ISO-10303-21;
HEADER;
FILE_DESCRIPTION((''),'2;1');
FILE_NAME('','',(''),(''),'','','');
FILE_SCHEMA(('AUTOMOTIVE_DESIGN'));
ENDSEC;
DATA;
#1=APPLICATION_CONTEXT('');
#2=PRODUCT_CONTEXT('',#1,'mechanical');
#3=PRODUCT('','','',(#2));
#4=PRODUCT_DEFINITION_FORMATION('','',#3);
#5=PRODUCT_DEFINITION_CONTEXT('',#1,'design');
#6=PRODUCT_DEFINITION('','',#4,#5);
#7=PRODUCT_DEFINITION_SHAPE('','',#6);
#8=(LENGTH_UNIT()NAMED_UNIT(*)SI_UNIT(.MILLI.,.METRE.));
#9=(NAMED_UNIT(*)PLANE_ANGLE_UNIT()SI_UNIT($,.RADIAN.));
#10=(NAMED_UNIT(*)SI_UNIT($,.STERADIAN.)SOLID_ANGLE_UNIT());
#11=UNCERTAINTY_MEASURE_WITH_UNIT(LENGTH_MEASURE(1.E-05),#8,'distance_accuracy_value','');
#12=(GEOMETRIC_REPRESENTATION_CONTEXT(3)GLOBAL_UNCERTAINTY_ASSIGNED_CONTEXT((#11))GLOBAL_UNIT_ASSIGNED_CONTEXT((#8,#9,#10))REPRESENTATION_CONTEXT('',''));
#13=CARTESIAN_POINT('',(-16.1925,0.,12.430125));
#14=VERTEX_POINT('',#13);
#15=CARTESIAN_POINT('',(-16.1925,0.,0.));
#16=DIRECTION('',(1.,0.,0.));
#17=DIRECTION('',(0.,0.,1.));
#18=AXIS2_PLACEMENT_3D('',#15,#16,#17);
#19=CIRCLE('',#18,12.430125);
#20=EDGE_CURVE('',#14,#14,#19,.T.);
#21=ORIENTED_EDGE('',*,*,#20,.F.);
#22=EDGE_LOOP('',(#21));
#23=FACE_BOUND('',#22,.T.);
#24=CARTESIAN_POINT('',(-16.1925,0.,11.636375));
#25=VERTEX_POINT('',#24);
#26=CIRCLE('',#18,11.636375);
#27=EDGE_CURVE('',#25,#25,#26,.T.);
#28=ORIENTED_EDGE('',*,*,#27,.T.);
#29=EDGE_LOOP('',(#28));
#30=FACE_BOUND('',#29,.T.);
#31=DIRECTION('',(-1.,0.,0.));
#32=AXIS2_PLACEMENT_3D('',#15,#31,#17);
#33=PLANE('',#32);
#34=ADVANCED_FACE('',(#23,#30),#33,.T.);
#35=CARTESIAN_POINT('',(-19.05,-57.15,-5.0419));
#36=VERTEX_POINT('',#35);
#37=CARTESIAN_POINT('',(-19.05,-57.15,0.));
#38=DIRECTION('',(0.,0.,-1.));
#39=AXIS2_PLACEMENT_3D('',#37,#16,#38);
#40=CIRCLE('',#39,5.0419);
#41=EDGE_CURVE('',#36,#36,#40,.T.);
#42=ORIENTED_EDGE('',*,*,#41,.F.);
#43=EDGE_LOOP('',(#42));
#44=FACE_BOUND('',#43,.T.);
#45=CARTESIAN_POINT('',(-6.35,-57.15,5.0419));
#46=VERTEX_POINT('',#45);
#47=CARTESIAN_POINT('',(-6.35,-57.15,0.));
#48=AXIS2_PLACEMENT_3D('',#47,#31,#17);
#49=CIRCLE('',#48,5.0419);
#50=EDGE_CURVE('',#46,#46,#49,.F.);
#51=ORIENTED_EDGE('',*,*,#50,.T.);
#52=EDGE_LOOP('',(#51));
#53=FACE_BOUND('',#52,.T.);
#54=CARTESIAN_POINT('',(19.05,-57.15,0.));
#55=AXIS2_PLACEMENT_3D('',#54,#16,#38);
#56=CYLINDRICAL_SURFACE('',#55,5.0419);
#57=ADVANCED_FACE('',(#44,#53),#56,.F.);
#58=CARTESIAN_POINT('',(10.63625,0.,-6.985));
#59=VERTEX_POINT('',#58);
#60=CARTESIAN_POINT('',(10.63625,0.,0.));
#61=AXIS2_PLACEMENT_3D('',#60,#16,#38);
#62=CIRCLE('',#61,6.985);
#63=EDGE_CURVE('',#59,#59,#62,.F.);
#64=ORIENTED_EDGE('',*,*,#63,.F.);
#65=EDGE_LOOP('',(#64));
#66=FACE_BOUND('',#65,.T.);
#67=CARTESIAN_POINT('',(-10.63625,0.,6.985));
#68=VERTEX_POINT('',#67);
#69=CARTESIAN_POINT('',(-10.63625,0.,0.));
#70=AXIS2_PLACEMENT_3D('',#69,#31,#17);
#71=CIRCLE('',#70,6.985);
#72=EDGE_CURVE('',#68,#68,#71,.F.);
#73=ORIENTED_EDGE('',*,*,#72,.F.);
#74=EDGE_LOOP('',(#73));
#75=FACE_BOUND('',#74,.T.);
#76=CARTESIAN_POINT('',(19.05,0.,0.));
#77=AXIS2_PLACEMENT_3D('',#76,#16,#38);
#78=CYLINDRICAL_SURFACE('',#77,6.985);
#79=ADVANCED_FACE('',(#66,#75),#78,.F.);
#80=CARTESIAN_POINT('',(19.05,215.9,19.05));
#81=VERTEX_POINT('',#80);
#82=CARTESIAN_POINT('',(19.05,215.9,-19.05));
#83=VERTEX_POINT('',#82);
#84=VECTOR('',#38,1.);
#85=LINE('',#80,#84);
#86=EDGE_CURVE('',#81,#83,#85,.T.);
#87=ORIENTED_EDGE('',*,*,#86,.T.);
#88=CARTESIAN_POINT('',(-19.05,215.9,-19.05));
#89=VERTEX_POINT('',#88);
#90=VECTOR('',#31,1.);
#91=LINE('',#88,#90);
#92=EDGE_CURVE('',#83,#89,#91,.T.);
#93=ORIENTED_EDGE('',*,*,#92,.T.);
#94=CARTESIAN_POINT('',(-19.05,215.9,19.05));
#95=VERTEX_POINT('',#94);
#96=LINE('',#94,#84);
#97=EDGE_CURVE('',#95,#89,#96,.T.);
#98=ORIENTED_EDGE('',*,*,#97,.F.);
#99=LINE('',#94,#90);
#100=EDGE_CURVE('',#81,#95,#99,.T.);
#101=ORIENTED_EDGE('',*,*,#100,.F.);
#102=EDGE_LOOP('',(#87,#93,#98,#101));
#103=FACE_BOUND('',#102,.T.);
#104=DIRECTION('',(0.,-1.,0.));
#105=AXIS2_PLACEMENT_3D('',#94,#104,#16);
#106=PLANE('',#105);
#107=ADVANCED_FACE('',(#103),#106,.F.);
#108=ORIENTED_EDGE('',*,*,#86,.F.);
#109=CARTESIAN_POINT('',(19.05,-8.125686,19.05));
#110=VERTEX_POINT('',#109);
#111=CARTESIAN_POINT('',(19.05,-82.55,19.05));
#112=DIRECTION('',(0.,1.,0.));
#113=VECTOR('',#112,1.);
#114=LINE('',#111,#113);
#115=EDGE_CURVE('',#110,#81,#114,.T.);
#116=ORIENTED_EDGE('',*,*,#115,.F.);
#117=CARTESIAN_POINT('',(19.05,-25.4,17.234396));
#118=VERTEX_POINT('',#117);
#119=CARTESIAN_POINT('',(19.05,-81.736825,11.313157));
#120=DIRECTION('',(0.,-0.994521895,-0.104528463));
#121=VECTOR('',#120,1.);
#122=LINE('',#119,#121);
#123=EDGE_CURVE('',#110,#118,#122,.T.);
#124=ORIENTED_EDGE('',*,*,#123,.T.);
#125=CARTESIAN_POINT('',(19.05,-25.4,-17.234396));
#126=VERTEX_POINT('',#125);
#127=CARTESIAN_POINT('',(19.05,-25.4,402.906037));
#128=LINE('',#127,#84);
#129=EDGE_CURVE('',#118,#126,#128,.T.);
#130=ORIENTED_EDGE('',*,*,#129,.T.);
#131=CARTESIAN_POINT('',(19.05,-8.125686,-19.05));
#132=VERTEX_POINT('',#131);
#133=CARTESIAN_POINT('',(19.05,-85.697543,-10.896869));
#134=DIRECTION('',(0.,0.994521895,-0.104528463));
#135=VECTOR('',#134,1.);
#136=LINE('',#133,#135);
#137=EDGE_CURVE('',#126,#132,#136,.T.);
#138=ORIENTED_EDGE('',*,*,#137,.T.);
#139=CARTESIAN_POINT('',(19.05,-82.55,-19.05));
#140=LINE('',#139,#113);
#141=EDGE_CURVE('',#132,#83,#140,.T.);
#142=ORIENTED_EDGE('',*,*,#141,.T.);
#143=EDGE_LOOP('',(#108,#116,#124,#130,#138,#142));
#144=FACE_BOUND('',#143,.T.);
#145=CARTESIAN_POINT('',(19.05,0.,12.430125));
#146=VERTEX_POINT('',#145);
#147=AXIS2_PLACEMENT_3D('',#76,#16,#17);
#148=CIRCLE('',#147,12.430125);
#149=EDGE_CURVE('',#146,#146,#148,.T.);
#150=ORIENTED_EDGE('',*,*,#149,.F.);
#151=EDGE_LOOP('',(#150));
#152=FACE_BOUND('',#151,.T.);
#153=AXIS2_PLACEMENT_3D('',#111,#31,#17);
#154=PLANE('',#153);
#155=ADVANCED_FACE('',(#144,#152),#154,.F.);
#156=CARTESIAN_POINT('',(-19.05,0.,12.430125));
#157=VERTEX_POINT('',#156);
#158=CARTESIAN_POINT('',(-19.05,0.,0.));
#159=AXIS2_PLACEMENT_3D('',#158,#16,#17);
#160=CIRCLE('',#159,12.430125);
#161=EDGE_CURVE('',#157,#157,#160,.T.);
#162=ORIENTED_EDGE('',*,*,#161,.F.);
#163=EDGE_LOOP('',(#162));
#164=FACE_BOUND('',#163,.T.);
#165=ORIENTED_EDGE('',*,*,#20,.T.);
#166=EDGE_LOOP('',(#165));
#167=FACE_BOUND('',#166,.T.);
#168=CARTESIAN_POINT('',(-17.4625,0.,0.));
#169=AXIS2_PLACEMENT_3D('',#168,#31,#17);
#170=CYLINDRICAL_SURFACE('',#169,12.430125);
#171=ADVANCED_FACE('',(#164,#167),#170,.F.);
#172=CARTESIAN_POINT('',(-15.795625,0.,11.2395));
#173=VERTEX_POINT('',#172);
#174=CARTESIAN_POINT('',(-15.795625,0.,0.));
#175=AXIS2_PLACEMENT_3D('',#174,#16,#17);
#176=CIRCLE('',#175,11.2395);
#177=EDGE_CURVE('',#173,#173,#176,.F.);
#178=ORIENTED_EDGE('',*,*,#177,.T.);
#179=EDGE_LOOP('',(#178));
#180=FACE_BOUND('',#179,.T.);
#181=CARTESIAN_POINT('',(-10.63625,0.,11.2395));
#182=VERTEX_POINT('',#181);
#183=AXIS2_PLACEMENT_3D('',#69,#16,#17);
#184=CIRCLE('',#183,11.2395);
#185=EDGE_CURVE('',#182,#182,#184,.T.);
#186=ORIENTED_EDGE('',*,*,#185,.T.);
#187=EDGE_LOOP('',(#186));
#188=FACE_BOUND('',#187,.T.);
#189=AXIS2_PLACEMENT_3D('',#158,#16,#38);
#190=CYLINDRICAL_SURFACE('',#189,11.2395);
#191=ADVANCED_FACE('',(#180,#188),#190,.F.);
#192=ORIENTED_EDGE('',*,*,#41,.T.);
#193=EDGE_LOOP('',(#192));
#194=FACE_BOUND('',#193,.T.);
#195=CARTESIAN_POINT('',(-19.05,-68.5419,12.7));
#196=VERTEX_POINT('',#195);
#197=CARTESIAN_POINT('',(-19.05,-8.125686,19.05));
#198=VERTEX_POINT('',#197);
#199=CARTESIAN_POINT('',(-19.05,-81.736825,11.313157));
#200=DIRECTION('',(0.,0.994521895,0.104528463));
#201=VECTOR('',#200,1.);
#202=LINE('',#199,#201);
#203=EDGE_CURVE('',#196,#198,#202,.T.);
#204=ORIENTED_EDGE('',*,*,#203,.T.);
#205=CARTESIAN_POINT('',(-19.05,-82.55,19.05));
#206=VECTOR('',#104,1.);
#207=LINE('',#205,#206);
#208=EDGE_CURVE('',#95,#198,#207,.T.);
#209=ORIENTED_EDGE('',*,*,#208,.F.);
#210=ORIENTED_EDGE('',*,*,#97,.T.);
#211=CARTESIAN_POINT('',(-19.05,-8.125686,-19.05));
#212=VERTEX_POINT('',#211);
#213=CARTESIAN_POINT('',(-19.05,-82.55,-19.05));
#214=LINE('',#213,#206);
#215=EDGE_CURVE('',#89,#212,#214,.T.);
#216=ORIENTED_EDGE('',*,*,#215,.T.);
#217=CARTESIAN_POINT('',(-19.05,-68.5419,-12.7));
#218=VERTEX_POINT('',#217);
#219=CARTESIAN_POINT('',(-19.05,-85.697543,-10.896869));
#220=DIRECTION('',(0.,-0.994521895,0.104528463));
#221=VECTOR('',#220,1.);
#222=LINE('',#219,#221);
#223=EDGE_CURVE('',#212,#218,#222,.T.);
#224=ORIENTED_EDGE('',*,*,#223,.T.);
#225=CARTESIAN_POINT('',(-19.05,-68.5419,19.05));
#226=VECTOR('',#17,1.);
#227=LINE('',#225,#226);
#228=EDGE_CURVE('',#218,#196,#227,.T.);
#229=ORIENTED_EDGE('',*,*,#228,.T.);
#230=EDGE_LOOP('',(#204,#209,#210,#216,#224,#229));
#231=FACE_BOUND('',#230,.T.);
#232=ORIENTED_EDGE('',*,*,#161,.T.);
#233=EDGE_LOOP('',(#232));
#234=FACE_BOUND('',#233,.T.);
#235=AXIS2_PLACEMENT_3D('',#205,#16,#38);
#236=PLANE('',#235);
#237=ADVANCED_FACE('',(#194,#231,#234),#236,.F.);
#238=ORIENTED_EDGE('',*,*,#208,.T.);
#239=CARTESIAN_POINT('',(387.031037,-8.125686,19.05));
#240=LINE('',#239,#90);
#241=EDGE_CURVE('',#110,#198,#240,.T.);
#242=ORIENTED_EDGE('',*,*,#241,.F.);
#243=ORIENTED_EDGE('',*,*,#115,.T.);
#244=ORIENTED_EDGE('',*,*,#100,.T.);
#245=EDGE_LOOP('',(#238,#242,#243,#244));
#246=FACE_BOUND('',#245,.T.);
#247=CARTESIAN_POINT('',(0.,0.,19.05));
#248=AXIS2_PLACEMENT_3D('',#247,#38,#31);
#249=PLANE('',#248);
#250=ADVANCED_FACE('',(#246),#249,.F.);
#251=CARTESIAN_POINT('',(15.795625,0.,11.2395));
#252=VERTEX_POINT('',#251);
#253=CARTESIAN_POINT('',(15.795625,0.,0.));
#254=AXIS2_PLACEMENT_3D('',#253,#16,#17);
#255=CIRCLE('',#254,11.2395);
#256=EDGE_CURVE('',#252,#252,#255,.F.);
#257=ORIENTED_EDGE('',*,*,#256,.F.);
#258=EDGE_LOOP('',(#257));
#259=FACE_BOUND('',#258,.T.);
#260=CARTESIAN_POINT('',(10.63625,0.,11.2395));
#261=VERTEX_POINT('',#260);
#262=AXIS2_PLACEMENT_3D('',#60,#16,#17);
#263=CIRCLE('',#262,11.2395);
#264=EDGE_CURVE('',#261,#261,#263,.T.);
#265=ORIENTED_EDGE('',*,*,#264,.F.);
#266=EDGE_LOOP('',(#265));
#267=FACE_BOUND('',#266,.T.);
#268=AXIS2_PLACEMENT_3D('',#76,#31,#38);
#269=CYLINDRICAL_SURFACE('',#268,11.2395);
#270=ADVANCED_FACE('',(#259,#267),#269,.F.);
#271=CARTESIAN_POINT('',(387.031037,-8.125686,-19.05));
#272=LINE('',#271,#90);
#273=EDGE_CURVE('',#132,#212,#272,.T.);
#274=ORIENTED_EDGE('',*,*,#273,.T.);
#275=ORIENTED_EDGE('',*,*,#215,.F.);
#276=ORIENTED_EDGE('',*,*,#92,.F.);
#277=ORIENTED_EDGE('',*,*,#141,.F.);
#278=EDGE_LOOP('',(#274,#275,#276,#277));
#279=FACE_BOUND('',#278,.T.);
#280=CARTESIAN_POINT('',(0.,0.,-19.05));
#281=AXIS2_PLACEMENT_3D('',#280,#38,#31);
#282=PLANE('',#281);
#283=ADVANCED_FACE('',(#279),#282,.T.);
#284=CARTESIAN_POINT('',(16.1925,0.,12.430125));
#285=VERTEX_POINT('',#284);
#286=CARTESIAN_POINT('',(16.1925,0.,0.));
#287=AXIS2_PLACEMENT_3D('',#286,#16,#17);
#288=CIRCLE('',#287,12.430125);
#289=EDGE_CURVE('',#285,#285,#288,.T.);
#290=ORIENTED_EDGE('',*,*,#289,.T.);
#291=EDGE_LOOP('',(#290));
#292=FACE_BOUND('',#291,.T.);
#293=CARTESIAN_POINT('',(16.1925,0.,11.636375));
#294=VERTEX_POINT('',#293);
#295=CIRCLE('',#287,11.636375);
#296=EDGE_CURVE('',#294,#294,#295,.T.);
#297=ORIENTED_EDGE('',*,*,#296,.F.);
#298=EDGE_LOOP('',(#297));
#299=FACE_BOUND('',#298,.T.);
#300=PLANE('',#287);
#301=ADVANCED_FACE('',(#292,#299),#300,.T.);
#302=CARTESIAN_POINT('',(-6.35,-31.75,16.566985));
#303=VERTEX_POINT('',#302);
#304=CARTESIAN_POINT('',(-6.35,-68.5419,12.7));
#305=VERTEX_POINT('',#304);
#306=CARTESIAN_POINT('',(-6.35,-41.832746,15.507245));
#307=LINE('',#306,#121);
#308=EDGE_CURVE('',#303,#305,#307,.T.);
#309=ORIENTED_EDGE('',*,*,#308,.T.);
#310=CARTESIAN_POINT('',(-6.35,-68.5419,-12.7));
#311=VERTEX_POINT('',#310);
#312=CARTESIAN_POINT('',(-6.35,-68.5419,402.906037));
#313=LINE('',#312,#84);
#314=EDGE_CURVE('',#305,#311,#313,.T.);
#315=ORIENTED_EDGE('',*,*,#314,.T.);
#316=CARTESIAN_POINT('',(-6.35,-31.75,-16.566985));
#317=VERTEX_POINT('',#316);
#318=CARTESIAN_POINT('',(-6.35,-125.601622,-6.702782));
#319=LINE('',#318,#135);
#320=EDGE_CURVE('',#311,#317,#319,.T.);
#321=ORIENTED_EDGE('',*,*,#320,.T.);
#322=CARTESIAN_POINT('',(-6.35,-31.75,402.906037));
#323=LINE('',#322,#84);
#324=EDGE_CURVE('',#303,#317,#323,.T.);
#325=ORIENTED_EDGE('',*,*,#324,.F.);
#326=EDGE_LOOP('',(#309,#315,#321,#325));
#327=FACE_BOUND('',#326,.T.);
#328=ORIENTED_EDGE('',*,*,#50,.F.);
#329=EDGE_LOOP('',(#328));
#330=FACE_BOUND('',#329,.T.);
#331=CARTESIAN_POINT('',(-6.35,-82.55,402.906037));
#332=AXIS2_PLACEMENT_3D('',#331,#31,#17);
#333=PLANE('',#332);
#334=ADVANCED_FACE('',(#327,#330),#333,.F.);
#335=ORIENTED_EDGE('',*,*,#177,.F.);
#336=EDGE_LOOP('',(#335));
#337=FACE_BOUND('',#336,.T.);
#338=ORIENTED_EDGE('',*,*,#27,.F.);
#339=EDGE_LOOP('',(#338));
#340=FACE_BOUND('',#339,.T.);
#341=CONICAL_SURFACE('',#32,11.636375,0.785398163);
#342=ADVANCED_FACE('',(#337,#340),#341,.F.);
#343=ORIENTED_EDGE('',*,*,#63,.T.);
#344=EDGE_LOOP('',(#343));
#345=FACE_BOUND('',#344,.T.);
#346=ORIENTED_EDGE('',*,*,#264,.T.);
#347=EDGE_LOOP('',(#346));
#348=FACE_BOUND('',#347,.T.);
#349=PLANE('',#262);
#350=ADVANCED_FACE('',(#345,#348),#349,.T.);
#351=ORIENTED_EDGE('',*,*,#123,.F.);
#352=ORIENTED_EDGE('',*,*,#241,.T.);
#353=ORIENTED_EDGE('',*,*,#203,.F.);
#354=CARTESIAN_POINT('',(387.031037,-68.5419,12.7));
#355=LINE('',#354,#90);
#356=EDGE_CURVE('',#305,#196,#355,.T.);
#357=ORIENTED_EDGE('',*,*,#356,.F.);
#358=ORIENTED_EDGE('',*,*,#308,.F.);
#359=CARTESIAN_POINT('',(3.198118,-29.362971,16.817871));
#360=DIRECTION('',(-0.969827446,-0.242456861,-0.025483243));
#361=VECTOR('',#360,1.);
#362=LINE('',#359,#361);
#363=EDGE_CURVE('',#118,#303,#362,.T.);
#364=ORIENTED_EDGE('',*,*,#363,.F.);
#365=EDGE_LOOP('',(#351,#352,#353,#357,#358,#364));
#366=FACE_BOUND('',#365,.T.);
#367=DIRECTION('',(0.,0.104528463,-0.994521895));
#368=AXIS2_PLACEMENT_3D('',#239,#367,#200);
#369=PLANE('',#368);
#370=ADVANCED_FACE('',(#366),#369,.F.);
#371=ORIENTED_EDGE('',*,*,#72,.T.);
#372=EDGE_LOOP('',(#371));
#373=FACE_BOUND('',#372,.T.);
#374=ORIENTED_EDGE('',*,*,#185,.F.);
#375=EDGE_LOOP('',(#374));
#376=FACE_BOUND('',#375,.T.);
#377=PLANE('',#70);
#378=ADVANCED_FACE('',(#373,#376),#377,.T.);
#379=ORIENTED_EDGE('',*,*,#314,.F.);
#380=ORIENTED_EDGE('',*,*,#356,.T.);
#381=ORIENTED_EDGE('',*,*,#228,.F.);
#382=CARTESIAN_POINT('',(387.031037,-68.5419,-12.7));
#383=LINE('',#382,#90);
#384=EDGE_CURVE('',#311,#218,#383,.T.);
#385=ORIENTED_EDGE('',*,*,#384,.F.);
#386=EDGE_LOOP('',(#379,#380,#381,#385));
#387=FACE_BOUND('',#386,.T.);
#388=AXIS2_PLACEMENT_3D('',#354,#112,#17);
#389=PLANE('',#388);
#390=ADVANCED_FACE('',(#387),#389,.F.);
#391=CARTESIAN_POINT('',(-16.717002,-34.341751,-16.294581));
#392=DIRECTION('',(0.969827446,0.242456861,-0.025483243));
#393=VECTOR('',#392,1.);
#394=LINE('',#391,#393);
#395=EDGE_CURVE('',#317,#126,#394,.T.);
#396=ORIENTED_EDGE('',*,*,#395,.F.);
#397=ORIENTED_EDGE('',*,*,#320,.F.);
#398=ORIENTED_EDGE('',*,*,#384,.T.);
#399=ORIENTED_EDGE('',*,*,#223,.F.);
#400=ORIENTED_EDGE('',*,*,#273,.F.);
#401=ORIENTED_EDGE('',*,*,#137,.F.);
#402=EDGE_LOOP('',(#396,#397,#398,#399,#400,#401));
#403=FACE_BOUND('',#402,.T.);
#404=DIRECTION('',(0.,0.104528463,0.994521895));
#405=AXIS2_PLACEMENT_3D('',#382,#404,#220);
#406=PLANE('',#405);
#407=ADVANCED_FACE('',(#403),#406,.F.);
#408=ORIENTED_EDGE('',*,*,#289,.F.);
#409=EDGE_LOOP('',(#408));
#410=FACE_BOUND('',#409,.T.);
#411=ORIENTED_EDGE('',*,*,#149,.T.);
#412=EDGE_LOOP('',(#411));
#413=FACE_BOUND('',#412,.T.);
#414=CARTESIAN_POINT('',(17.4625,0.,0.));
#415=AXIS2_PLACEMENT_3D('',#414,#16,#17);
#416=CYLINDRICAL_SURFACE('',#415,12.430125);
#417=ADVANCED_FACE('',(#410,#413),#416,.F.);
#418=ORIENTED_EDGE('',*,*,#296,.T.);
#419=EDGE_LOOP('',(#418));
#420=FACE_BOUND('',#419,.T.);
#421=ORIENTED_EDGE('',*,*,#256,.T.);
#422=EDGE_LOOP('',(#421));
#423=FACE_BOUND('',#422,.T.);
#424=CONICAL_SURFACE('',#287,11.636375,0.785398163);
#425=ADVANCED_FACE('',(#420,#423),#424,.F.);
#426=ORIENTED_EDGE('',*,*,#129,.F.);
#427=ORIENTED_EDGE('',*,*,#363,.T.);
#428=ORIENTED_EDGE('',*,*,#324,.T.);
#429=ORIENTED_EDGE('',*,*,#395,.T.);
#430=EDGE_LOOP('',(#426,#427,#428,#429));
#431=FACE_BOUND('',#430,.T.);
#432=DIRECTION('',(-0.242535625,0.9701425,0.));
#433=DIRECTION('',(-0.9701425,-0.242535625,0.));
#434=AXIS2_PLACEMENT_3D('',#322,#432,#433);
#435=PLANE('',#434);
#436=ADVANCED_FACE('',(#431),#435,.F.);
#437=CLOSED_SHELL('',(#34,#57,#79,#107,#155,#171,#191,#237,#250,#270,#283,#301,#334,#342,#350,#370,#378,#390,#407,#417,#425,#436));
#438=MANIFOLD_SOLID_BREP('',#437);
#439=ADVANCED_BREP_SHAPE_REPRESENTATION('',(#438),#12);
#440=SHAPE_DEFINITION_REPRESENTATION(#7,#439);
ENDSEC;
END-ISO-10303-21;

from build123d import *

# Parameters (mm, degrees)
SKETCH5_W               = 38.1
SKETCH5_H               = 298.45
BOSS_EXTRUDE2_DEPTH     = 19.05
F_3_8_CLEARANCE_HOLE2_D = 10.0838
F_3_8_CLEARANCE_HOLE4_D = 13.97
BODY_MOVE_COPY4_ANGLE   = 90
CUT_EXTRUDE1_DEPTH      = 218.574389578
CUT_EXTRUDE1_DEPTH_BACK = 218.574389578
CUT_EXTRUDE5_DEPTH      = 218.574389578
CUT_EXTRUDE5_DEPTH_BACK = 218.574389578


with BuildPart() as part:
    # Sketch5 → Boss-Extrude2 (new, symmetric)
    with BuildSketch(Plane.XY):
        with Locations((0, 66.675)):
            Rectangle(SKETCH5_W, SKETCH5_H)
    extrude(amount=BOSS_EXTRUDE2_DEPTH, both=True)

    # 3/8 Clearance Hole2 (through all)
    with Locations(Plane(origin=(19.05, 0, 0), x_dir=(0, 0, -1), z_dir=(1, 0, 0))):
        with Locations((0, -57.15)):
            Hole(F_3_8_CLEARANCE_HOLE2_D / 2)

    # 3/8 Clearance Hole4 (through all)
    with Locations(Plane(origin=(19.05, 0, 0), x_dir=(0, 0, -1), z_dir=(1, 0, 0))):
        with Locations((0, 0)):
            Hole(F_3_8_CLEARANCE_HOLE4_D / 2)


with BuildPart() as body_2:
    # uxcell-FR6ZZ: read off the stored shape, not the designer's step
    # uxcell-FR6ZZ outline → uxcell-FR6ZZ (revolve)
    with BuildSketch(Plane(origin=(46.870492888, 0, -67.456601715), x_dir=(1, 0, 0), z_dir=(0, 0, 1))):
        Polygon((12.430125, 146.229545606), (4.7625, 146.229545606), (4.7625, 137.815795606), (11.2395, 137.815795606), (11.2395, 142.975170606), (11.636375, 143.372045606), (12.430125, 143.372045606), align=None)
    revolve(axis=Axis((46.870492888, 0, -67.456601715), (0, 1, 0)))


with BuildPart() as body_2_1:
    # Body-Move/Copy4: read off the stored shape, not the designer's step
    # Body-Move/Copy4: moved
    add(body_2.part.moved(Location((-46.8704929, -127.1795456, 67.4566017))).rotate(Axis((0, 0, 0), (0, 0, -1)), BODY_MOVE_COPY4_ANGLE))


with BuildPart() as body_3:
    # Mirror1: mirrored copy
    add(body_2_1.part.mirror(Plane(origin=(0, 0, 0), x_dir=(0, 0, 1), z_dir=(1, 0, 0))))


with BuildPart() as part_1:
    add(part.part)

    # Combine2: cut body 3, body 2
    add(body_3.part, mode=Mode.SUBTRACT)
    add(body_2_1.part, mode=Mode.SUBTRACT)

    # Sketch11 → Cut-Extrude1 (cut, two sides: drawn at the far end of the back side and taken through both)
    with BuildSketch(Plane.XY.offset(-CUT_EXTRUDE1_DEPTH_BACK)):
        Polygon((-6.35, -691.607801887), (-6.35, -82.55), (-6.35, -31.75), (19.05, -25.4), (609.922858655, 122.318214664), (1581.067185153, -612.994182394), (964.794326498, -1426.920198945), align=None)
    extrude(amount=CUT_EXTRUDE1_DEPTH + CUT_EXTRUDE1_DEPTH_BACK, mode=Mode.SUBTRACT)

    # Sketch18 → Cut-Extrude5 (cut, two sides: drawn at the far end of the back side and taken through both)
    with BuildSketch(Plane(origin=(0, 0, 0), x_dir=(0, 0, -1), z_dir=(1, 0, 0)).offset(-CUT_EXTRUDE5_DEPTH_BACK)):
        Polygon((-67.601886726, 453.814659538), (-19.05, -8.125685716), (-12.7, -68.5419), (12.7, -68.5419), (19.05, -8.125685716), (67.601886726, 453.814659538), (67.601886726, -475.155024096), (-67.601886726, -475.155024096), align=None)
    extrude(amount=CUT_EXTRUDE5_DEPTH + CUT_EXTRUDE5_DEPTH_BACK, mode=Mode.SUBTRACT)


solid = part_1.part
